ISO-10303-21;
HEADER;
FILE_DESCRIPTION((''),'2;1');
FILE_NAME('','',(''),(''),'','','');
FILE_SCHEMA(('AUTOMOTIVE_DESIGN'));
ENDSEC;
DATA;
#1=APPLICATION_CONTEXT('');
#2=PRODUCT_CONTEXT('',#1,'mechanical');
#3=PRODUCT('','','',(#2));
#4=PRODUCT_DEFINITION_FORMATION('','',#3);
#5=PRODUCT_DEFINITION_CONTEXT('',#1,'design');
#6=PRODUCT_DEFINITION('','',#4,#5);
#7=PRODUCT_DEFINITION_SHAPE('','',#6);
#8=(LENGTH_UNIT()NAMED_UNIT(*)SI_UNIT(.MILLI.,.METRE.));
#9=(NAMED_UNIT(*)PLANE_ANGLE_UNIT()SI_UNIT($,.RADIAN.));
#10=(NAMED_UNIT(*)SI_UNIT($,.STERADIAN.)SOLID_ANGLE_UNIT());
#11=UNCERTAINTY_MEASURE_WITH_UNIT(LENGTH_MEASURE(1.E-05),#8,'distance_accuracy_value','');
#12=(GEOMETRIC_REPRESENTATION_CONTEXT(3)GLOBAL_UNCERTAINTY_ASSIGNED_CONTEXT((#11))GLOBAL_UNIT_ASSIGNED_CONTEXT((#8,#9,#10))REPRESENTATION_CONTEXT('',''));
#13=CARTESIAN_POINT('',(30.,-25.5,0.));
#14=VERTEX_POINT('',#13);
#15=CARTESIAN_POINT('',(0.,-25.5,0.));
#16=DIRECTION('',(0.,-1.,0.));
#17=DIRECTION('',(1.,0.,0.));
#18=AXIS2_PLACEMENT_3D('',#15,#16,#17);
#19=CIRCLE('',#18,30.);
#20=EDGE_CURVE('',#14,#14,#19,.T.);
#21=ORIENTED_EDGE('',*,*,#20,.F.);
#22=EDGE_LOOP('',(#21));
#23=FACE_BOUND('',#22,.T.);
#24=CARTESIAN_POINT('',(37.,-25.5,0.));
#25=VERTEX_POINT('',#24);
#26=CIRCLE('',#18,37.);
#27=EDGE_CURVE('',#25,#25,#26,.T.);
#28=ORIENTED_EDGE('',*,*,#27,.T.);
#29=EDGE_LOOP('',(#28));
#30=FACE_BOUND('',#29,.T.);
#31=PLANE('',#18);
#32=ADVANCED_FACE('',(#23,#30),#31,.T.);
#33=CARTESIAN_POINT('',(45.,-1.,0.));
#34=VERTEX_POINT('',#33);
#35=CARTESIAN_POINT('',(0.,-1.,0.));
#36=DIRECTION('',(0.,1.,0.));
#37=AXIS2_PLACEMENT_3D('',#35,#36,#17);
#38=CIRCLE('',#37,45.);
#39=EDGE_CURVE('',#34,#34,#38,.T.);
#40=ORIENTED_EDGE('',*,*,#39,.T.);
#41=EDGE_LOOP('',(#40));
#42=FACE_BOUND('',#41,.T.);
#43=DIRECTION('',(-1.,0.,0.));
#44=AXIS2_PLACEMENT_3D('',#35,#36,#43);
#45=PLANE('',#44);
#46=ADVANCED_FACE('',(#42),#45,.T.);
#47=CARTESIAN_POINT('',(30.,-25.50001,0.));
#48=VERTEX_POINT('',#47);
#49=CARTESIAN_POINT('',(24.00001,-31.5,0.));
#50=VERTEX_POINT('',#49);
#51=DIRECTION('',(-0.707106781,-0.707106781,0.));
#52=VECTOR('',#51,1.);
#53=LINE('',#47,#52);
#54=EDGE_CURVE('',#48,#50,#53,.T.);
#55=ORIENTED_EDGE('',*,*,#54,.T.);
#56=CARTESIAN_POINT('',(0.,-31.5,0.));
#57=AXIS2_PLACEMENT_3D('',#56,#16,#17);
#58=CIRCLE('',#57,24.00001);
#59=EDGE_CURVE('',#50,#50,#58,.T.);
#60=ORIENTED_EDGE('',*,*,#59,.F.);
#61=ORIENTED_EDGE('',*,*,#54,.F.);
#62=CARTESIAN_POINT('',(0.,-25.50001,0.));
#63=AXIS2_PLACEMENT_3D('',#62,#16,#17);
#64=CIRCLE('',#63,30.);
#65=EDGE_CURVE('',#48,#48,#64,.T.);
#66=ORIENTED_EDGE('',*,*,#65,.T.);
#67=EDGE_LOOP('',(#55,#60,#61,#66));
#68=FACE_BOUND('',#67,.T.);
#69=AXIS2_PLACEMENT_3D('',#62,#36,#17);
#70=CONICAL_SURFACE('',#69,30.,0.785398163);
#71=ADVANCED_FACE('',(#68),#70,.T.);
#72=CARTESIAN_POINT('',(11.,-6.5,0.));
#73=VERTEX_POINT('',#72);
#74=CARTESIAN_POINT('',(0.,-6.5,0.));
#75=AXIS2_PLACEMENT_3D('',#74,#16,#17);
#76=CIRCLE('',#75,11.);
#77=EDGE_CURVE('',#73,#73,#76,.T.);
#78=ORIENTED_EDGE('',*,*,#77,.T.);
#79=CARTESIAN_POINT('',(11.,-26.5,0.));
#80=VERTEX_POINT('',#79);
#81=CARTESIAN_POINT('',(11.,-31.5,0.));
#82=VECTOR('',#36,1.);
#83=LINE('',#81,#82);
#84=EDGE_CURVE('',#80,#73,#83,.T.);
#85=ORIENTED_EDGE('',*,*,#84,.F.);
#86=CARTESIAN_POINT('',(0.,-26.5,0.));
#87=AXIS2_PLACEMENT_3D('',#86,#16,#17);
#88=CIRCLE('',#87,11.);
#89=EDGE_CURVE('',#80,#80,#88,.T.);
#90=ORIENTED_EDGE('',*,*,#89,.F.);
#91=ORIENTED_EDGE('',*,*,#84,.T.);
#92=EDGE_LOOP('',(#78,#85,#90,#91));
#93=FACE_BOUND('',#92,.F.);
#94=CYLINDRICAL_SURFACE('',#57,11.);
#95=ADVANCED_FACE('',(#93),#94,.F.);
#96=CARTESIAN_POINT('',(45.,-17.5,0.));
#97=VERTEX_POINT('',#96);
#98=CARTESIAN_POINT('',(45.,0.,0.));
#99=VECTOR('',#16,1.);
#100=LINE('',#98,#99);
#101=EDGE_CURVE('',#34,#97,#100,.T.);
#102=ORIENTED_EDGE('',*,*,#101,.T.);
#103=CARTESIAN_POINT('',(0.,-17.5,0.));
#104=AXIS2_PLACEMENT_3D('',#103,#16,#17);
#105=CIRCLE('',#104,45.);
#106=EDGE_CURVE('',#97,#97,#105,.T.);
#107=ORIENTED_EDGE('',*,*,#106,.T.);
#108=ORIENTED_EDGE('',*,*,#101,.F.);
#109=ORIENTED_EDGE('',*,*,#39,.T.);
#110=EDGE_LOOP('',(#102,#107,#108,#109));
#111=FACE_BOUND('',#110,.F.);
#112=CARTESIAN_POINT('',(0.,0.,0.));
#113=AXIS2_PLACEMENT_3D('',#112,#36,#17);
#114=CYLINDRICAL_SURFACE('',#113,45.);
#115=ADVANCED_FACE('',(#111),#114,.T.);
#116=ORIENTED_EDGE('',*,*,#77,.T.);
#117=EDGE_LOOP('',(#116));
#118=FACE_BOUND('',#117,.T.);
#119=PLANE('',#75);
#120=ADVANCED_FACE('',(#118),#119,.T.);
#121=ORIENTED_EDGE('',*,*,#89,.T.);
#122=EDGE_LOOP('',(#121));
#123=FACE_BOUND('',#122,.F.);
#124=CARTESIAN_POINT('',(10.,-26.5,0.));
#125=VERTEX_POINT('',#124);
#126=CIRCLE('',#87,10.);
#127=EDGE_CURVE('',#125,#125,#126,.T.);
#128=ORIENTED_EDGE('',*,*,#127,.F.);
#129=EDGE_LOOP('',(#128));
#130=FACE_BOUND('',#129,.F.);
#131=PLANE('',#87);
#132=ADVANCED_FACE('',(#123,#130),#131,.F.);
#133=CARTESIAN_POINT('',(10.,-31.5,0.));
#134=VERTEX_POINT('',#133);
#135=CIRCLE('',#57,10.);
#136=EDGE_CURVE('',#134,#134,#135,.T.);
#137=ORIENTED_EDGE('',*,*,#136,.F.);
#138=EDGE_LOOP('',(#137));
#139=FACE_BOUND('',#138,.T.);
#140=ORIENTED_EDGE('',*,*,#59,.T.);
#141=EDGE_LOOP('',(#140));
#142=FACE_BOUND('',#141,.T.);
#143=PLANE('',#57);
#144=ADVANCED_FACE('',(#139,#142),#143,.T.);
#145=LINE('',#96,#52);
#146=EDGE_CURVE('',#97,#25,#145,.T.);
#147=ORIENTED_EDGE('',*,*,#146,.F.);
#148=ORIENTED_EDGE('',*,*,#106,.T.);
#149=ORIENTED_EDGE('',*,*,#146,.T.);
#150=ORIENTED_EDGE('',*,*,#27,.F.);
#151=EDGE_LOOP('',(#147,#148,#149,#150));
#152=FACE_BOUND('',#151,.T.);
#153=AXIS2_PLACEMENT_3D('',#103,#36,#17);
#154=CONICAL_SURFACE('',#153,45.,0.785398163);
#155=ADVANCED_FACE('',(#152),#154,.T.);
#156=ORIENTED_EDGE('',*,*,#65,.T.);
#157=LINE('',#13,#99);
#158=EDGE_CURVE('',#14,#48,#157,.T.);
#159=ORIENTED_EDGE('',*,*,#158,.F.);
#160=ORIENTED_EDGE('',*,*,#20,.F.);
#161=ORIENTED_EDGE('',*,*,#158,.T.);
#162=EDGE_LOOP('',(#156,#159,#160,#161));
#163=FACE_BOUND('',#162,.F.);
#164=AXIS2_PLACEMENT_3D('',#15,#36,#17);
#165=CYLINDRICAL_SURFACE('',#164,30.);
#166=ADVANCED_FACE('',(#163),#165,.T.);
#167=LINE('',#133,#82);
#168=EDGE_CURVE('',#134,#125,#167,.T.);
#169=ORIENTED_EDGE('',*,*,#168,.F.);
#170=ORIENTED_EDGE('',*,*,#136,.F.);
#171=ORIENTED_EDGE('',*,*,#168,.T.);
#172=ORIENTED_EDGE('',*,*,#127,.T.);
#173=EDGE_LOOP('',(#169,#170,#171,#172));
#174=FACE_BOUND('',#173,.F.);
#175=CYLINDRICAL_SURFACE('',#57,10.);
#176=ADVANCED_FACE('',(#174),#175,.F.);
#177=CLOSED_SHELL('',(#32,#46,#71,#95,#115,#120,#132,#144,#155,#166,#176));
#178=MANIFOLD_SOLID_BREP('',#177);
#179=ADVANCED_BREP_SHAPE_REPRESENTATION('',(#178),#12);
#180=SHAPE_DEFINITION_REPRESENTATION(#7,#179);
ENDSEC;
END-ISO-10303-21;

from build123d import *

# Parameters (mm, degrees)
F0_R      = 45
F1_DEPTH  = 25.5
F2_R      = 58
F3_DEPTH  = 1
F4_SIZE   = 8
F5_R      = 30
F6_DEPTH  = 6
F7_SIZE   = 5.99999
F9_R      = 11
F10_DEPTH = 25
F11_R     = 11
F11_R_2   = 10
F12_DEPTH = 5


# Not quite as in the source:
# - a fillet or chamfer is up to 0.001 mm smaller than in the source, because OpenCascade refuses the exact size


with BuildPart() as f1:
    # F0 (on Front) → F1 (new body)
    with BuildSketch(Plane.XZ):
        Circle(F0_R)
    extrude(amount=F1_DEPTH)

    # F2 (on face) → F3 (cut)
    with BuildSketch(Plane(origin=(0, 0, 0), x_dir=(-1, 0, 0), z_dir=(0, 1, 0))):
        Circle(F2_R)
    extrude(amount=-F3_DEPTH, mode=Mode.SUBTRACT)

    # F4
    f4_edges = [f1.edges().sort_by_distance(p)[0] for p in [
        (-45, -25.5, 0),
    ]]
    chamfer(f4_edges, length=F4_SIZE)

    # F5 (on face) → F6 (join)
    with BuildSketch(Plane.XZ.offset(25.5)):
        Circle(F5_R)
    extrude(amount=F6_DEPTH)

    # F7 (size 6 in the source; OpenCascade refuses exactly that, so slightly less here)
    f7_edges = [f1.edges().sort_by_distance(p)[0] for p in [
        (-30, -31.5, 0),
    ]]
    chamfer(f7_edges, length=F7_SIZE)

    # F9 (on face) → F10 (cut)
    with BuildSketch(Plane.XZ.offset(31.5)):
        Circle(F9_R)
    extrude(amount=-F10_DEPTH, mode=Mode.SUBTRACT)

    # F11 (on face) → F12 (join)
    with BuildSketch(Plane.XZ.offset(31.5)):
        Circle(F11_R)
        Circle(F11_R_2, mode=Mode.SUBTRACT)
    extrude(amount=-F12_DEPTH)


solid = f1.part
